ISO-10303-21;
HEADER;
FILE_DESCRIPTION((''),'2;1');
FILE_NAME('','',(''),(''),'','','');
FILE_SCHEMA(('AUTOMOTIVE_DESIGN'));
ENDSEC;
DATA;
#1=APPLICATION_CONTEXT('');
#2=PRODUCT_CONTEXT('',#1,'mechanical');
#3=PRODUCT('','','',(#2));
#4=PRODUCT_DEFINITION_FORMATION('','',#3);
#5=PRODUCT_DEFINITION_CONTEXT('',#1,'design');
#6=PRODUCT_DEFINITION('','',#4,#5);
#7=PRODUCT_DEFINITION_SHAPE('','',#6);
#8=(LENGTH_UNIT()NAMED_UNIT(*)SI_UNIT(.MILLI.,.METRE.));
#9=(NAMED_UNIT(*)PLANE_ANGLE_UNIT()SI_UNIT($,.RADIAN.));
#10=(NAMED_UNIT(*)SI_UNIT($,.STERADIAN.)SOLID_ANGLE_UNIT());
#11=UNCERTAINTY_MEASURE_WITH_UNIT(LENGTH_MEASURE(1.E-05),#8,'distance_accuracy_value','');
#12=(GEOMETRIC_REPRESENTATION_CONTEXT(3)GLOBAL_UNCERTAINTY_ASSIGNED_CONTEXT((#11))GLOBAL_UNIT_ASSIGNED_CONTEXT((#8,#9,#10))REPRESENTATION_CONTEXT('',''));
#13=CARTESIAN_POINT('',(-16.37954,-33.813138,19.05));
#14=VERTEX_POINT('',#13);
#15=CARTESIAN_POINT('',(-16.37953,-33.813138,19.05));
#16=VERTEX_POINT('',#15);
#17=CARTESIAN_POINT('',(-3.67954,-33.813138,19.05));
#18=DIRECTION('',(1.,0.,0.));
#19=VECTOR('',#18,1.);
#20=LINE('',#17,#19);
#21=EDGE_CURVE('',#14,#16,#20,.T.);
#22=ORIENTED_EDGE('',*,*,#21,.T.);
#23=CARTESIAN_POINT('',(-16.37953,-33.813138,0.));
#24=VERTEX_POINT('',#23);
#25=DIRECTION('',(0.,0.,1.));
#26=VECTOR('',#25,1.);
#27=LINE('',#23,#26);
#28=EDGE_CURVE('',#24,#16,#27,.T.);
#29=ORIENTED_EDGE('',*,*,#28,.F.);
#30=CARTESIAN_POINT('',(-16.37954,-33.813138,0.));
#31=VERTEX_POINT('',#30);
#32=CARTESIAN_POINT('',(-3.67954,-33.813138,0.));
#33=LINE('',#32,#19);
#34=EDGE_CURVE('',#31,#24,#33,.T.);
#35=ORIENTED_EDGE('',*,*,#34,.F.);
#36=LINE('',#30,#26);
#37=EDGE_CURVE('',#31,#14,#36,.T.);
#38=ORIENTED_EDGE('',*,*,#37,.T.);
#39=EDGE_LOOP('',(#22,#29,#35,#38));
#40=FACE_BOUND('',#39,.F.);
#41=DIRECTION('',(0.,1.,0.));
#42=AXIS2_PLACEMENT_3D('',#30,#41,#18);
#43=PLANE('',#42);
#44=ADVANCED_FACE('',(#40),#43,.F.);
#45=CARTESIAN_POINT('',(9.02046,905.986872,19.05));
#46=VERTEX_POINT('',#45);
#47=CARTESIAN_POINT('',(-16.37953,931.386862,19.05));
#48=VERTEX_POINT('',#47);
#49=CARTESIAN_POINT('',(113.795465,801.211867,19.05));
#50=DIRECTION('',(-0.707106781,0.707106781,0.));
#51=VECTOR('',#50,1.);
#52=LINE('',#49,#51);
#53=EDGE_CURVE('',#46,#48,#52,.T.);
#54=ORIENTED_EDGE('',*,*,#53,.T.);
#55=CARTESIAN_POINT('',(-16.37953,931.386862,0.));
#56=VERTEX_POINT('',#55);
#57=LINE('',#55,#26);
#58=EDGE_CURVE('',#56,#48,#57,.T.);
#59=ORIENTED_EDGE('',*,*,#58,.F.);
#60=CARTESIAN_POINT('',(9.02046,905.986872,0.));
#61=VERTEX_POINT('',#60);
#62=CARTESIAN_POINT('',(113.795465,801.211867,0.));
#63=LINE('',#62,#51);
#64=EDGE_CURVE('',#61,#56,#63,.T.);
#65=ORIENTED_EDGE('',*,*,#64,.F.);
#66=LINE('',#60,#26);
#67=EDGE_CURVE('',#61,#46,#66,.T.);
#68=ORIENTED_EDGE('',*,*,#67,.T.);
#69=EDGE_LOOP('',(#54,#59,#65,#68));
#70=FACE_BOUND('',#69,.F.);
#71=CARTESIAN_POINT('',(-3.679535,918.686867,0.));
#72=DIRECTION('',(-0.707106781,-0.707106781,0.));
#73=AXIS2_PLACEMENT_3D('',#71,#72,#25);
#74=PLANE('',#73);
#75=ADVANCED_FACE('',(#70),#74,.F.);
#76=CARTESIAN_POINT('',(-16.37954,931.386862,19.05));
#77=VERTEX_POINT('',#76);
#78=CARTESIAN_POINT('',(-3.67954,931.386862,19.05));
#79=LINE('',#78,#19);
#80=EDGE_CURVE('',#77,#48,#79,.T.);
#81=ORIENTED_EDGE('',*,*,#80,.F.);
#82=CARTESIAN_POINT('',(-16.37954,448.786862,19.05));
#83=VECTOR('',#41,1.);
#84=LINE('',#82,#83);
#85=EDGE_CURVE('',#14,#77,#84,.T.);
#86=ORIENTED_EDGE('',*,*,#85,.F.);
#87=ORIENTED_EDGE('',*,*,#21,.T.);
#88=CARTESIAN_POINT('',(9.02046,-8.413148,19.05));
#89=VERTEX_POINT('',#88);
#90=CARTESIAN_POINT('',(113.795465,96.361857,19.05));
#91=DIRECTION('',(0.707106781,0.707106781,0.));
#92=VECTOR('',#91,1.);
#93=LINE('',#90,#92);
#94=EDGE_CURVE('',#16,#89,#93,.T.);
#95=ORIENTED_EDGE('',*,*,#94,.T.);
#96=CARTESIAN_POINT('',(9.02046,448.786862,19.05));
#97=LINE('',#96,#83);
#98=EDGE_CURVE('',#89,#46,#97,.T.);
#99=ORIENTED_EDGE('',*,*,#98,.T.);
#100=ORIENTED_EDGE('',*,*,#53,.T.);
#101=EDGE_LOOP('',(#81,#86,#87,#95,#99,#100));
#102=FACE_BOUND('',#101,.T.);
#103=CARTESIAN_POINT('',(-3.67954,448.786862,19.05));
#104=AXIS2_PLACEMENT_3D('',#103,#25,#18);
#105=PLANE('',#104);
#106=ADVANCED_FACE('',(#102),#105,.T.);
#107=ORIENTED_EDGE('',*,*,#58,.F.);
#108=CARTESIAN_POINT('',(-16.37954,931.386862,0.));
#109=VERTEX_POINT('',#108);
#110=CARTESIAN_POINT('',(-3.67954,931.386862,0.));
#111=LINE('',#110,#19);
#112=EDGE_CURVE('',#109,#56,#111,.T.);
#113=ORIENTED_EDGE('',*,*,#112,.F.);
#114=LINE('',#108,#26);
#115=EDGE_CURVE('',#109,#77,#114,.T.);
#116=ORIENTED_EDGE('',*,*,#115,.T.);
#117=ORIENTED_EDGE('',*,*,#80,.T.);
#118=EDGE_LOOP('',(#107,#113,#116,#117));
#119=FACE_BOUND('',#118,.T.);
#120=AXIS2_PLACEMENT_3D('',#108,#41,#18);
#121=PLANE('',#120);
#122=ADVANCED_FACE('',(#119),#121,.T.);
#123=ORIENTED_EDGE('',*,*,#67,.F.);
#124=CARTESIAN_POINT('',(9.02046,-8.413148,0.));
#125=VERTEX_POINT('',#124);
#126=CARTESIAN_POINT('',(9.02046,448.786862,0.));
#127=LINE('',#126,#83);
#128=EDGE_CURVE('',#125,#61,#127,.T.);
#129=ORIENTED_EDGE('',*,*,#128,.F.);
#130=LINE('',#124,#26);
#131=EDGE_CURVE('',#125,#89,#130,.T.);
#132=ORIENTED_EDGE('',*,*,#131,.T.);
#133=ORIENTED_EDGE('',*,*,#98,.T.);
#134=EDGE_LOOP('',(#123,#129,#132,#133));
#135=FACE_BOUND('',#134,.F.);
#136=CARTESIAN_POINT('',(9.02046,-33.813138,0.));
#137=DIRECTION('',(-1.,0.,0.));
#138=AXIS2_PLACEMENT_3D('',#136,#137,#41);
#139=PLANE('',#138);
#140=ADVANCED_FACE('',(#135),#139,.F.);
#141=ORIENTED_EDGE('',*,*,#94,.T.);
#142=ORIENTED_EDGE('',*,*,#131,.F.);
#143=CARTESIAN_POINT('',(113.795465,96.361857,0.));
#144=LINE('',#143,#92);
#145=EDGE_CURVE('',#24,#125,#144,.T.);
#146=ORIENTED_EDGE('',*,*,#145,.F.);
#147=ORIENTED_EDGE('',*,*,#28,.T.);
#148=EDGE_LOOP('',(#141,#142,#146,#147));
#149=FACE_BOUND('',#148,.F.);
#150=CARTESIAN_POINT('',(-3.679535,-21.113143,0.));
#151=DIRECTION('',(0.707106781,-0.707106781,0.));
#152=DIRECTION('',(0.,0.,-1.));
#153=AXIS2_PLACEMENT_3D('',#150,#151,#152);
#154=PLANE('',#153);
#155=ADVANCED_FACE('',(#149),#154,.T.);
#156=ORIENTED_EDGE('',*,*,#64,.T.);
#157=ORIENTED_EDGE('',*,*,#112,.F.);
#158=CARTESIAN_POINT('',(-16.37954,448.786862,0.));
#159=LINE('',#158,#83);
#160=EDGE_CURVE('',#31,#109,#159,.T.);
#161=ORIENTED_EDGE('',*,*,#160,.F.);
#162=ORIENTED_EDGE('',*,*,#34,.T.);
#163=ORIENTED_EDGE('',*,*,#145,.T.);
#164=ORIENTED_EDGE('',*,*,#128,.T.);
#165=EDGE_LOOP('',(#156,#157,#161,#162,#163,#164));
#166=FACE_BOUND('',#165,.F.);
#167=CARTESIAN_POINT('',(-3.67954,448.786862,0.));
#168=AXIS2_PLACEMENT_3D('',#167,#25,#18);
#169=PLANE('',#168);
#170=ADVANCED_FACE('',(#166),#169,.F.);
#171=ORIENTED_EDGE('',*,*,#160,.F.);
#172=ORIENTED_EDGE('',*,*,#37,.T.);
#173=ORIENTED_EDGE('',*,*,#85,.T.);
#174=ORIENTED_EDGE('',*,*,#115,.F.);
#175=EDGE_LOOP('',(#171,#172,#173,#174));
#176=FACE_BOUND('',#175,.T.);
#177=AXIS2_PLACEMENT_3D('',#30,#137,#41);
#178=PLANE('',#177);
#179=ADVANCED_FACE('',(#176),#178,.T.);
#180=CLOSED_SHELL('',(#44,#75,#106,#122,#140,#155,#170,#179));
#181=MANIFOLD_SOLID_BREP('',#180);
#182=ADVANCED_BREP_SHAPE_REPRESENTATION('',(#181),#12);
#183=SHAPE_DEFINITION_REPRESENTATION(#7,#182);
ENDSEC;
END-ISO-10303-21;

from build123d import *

# Parameters (mm, degrees)
F0_W     = 25.4
F0_H     = 965.2
F1_DEPTH = 19.05
F2_SIZE  = 25.39999


# Not quite as in the source:
# - a fillet or chamfer is up to 0.001 mm smaller than in the source, because OpenCascade refuses the exact size


with BuildPart() as f1:
    # F0 (on Top) → F1 (new body)
    with BuildSketch(Plane.XY):
        with Locations((-3.6795400083, 448.7868617729)):
            Rectangle(F0_W, F0_H)
    extrude(amount=F1_DEPTH)

    # F2 (size 25.4 in the source; OpenCascade refuses exactly that, so slightly less here)
    f2_edges = [f1.edges().sort_by_distance(p)[0] for p in [
        (9.02046, -33.813138, 9.525),
        (9.02046, 931.386862, 9.525),
    ]]
    chamfer(f2_edges, length=F2_SIZE)


solid = f1.part
